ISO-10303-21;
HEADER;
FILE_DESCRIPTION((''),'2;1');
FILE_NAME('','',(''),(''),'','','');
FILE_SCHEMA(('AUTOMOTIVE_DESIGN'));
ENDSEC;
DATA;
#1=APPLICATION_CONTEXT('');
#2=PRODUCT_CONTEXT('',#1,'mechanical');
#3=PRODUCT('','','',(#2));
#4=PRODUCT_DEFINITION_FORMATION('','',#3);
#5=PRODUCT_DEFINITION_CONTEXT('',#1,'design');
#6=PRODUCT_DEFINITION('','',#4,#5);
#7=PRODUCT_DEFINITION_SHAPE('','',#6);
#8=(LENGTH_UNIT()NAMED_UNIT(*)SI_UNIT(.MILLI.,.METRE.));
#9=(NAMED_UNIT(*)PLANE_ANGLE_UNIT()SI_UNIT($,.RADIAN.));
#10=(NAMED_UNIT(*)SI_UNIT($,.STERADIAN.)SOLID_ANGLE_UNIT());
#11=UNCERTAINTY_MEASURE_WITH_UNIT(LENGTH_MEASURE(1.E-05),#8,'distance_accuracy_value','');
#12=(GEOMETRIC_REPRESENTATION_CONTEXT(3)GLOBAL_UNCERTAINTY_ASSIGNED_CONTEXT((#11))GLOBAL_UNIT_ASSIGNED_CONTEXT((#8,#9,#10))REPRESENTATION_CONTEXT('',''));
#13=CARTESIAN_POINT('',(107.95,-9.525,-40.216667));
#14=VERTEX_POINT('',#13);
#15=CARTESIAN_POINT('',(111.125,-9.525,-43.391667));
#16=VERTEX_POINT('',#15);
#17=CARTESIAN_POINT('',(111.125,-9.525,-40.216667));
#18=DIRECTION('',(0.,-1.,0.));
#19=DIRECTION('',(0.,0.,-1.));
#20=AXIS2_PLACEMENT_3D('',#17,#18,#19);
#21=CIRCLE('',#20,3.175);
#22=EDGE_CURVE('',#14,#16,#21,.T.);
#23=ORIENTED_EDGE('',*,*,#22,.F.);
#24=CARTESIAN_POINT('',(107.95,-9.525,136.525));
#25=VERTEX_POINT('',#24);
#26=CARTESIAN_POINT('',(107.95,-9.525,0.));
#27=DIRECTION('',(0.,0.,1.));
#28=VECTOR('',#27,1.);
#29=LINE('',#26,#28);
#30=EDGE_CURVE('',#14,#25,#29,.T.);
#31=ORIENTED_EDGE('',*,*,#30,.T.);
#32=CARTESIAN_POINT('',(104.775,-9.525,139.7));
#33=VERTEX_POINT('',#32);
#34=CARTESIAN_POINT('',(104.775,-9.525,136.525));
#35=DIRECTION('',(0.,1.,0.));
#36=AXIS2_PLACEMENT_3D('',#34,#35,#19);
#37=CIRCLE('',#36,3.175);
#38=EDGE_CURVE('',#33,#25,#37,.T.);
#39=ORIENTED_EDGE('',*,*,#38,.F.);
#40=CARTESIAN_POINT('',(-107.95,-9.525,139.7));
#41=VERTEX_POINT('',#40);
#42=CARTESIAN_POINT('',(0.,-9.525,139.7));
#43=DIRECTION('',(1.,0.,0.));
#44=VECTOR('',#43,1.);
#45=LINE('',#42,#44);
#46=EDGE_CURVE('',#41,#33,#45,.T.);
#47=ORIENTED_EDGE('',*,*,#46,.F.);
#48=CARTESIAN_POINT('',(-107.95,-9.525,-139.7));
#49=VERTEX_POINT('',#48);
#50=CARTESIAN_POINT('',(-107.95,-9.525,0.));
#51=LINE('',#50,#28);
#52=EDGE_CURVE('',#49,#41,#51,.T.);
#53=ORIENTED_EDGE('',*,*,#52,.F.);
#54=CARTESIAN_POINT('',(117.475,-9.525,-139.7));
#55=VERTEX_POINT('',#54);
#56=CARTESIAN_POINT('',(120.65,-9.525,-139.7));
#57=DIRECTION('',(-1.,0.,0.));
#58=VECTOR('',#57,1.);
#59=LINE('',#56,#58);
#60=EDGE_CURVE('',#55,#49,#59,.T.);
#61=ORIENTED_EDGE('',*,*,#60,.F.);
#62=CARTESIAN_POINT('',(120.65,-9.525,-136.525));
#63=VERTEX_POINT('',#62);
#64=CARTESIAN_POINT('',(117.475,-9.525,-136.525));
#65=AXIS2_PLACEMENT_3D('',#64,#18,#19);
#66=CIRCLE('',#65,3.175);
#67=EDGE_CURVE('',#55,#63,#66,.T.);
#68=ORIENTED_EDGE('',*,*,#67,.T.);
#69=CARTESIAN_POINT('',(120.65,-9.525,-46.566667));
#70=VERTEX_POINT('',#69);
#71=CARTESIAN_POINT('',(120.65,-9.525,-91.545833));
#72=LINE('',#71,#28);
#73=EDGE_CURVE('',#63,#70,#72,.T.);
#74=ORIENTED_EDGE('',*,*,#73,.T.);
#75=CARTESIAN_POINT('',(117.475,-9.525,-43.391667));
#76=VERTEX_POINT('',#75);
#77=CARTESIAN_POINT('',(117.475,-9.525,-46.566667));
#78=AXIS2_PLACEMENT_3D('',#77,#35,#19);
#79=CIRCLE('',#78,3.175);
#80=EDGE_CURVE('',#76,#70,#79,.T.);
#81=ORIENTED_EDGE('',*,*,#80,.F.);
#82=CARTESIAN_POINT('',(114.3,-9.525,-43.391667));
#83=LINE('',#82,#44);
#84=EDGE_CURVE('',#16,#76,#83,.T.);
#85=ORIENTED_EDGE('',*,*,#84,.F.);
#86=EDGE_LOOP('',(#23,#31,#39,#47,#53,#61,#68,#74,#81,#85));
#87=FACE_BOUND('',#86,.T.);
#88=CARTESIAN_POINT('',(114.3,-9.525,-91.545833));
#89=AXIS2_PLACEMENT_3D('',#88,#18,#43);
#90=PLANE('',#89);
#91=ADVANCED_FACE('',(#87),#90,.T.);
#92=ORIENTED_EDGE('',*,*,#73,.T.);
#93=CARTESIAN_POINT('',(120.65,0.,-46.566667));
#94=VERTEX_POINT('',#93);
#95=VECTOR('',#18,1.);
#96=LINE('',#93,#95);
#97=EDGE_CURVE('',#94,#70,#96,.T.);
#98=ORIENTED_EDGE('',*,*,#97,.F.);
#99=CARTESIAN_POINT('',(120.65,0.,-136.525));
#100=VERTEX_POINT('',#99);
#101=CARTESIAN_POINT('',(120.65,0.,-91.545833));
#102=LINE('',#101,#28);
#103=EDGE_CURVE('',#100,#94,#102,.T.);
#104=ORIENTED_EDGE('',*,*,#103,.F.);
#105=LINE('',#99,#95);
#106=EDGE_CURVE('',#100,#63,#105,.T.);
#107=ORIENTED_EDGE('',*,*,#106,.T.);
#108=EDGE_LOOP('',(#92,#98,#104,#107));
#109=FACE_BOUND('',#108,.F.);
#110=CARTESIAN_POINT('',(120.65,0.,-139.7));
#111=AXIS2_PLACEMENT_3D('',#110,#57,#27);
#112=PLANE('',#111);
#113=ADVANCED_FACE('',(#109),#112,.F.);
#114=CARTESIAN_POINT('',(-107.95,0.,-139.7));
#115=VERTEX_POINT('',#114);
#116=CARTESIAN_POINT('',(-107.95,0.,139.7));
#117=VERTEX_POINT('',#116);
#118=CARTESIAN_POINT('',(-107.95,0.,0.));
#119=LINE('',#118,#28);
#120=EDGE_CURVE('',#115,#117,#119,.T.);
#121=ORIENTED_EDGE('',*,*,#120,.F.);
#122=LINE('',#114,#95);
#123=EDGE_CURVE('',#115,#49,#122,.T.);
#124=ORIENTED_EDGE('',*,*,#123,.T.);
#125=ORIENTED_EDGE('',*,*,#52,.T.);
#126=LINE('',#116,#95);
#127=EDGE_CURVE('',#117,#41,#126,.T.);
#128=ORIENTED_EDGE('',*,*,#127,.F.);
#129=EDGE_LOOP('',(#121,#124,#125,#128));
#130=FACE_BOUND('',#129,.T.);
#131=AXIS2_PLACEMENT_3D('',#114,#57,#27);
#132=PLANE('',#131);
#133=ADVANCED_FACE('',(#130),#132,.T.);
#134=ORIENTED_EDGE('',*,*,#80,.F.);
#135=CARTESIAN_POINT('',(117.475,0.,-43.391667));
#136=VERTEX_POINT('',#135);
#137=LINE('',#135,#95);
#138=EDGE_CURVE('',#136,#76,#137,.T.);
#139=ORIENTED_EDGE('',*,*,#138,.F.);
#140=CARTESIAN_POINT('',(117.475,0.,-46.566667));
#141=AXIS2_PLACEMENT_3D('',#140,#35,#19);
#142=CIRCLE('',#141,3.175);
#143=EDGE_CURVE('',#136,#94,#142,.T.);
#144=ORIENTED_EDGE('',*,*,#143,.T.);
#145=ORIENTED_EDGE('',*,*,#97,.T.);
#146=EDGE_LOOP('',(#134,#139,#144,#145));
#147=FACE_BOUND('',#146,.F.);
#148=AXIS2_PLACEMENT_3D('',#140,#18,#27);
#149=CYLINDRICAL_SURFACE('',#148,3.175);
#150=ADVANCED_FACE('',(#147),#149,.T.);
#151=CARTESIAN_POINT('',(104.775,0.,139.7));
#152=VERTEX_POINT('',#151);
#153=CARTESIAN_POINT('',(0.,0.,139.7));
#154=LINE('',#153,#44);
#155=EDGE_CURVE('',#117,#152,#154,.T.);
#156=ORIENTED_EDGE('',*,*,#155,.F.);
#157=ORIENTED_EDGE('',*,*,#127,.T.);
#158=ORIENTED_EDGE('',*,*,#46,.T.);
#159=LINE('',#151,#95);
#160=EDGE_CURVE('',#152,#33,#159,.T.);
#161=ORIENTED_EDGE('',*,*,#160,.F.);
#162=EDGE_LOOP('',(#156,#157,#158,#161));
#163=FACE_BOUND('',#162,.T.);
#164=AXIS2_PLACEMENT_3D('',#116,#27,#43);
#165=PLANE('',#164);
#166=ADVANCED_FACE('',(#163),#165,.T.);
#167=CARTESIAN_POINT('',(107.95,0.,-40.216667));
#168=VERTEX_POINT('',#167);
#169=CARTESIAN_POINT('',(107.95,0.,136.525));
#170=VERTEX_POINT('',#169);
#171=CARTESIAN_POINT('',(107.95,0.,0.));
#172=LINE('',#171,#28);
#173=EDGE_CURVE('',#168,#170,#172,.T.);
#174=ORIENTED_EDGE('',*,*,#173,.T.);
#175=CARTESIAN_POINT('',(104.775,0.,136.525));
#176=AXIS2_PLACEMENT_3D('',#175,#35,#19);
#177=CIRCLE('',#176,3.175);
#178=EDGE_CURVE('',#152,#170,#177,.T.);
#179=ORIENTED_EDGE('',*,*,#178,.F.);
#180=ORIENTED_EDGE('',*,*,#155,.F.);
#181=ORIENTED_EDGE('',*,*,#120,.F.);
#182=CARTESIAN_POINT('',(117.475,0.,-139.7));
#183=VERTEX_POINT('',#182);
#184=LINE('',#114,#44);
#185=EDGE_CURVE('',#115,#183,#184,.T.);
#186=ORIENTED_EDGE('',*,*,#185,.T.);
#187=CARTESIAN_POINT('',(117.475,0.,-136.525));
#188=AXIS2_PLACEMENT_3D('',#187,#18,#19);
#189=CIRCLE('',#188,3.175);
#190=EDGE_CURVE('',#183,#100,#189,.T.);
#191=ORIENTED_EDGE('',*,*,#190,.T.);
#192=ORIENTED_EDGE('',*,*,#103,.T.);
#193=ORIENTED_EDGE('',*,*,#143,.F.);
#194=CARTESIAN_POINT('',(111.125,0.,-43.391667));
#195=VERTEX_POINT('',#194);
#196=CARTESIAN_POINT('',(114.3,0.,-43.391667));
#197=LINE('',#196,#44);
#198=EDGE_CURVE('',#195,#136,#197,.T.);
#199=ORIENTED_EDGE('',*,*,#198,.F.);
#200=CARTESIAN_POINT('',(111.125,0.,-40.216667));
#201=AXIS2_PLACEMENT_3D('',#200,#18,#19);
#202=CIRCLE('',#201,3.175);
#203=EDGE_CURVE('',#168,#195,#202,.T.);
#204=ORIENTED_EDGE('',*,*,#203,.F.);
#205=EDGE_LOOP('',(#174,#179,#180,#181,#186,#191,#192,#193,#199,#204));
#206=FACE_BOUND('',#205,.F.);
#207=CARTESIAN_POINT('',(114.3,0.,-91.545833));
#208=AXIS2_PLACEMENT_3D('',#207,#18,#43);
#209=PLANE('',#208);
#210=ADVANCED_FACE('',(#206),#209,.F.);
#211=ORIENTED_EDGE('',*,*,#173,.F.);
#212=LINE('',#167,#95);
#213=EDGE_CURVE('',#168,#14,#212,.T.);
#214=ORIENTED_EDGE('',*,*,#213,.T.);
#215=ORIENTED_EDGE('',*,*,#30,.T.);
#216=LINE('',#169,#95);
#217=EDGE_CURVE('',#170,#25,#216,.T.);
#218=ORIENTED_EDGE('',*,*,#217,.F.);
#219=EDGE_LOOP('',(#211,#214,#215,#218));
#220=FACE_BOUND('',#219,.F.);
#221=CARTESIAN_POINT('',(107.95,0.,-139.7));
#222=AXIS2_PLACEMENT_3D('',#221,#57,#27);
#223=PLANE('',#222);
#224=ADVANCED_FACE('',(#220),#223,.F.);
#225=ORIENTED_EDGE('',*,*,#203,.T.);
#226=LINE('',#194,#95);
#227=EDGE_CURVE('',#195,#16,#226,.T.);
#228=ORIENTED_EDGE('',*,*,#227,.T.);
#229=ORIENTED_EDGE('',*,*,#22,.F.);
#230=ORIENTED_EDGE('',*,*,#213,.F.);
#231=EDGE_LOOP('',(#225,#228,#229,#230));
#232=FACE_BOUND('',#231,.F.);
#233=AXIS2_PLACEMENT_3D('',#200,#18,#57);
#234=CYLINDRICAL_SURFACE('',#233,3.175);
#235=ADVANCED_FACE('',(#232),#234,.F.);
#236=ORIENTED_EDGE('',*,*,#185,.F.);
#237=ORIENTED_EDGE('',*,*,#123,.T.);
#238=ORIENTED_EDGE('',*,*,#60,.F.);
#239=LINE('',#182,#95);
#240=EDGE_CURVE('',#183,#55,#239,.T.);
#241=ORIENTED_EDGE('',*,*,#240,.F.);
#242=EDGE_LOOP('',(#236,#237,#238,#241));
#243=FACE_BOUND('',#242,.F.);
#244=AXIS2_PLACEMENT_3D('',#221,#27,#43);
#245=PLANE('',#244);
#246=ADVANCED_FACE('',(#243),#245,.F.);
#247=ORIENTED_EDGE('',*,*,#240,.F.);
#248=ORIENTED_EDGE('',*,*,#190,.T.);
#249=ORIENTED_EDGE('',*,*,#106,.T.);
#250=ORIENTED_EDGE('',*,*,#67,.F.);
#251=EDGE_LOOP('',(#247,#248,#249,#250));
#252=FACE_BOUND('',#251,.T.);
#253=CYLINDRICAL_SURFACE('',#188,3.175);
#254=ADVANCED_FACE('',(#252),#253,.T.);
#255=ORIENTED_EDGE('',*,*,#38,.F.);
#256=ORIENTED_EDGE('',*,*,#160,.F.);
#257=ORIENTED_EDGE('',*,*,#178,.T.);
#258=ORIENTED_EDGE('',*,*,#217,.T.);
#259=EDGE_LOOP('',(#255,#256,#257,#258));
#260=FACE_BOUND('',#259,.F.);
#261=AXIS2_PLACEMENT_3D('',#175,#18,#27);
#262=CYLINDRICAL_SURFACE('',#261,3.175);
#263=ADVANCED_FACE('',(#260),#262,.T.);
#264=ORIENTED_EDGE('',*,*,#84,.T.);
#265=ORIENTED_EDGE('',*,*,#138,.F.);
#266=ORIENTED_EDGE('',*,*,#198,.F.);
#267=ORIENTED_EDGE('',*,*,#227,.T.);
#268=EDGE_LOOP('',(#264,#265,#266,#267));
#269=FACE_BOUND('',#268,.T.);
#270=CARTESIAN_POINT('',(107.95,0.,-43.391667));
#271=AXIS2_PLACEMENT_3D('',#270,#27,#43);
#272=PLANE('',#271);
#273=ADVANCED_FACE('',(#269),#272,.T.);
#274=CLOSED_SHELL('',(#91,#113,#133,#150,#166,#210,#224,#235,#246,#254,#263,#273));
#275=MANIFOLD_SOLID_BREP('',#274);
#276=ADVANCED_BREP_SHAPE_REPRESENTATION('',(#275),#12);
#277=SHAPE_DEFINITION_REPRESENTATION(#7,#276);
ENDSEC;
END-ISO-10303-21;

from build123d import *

# Parameters (mm, degrees)
F0_W     = 215.9
F0_H     = 279.4
F1_DEPTH = 9.525
F2_W     = 12.7
F2_H     = 96.3083333333
F3_DEPTH = 9.525
F4_R     = 3.175


with BuildPart() as f1:
    # F0 (on Front) → F1 (new body)
    with BuildSketch(Plane.XZ):
        Rectangle(F0_W, F0_H)
    extrude(amount=F1_DEPTH)

    # F2 (on Front) → F3 (join, through all)
    with BuildSketch(Plane.XZ):
        with Locations((114.3, -91.5458333333)):
            Rectangle(F2_W, F2_H)
    extrude(amount=F3_DEPTH)

    # F4
    f4_edges = [f1.edges().sort_by_distance(p)[0] for p in [
        (107.95, -4.7625, 139.7),
        (107.95, -4.7625, -43.391667),
        (120.65, -4.7625, -43.391667),
        (120.65, -4.7625, -139.7),
    ]]
    fillet(f4_edges, radius=F4_R)


solid = f1.part
